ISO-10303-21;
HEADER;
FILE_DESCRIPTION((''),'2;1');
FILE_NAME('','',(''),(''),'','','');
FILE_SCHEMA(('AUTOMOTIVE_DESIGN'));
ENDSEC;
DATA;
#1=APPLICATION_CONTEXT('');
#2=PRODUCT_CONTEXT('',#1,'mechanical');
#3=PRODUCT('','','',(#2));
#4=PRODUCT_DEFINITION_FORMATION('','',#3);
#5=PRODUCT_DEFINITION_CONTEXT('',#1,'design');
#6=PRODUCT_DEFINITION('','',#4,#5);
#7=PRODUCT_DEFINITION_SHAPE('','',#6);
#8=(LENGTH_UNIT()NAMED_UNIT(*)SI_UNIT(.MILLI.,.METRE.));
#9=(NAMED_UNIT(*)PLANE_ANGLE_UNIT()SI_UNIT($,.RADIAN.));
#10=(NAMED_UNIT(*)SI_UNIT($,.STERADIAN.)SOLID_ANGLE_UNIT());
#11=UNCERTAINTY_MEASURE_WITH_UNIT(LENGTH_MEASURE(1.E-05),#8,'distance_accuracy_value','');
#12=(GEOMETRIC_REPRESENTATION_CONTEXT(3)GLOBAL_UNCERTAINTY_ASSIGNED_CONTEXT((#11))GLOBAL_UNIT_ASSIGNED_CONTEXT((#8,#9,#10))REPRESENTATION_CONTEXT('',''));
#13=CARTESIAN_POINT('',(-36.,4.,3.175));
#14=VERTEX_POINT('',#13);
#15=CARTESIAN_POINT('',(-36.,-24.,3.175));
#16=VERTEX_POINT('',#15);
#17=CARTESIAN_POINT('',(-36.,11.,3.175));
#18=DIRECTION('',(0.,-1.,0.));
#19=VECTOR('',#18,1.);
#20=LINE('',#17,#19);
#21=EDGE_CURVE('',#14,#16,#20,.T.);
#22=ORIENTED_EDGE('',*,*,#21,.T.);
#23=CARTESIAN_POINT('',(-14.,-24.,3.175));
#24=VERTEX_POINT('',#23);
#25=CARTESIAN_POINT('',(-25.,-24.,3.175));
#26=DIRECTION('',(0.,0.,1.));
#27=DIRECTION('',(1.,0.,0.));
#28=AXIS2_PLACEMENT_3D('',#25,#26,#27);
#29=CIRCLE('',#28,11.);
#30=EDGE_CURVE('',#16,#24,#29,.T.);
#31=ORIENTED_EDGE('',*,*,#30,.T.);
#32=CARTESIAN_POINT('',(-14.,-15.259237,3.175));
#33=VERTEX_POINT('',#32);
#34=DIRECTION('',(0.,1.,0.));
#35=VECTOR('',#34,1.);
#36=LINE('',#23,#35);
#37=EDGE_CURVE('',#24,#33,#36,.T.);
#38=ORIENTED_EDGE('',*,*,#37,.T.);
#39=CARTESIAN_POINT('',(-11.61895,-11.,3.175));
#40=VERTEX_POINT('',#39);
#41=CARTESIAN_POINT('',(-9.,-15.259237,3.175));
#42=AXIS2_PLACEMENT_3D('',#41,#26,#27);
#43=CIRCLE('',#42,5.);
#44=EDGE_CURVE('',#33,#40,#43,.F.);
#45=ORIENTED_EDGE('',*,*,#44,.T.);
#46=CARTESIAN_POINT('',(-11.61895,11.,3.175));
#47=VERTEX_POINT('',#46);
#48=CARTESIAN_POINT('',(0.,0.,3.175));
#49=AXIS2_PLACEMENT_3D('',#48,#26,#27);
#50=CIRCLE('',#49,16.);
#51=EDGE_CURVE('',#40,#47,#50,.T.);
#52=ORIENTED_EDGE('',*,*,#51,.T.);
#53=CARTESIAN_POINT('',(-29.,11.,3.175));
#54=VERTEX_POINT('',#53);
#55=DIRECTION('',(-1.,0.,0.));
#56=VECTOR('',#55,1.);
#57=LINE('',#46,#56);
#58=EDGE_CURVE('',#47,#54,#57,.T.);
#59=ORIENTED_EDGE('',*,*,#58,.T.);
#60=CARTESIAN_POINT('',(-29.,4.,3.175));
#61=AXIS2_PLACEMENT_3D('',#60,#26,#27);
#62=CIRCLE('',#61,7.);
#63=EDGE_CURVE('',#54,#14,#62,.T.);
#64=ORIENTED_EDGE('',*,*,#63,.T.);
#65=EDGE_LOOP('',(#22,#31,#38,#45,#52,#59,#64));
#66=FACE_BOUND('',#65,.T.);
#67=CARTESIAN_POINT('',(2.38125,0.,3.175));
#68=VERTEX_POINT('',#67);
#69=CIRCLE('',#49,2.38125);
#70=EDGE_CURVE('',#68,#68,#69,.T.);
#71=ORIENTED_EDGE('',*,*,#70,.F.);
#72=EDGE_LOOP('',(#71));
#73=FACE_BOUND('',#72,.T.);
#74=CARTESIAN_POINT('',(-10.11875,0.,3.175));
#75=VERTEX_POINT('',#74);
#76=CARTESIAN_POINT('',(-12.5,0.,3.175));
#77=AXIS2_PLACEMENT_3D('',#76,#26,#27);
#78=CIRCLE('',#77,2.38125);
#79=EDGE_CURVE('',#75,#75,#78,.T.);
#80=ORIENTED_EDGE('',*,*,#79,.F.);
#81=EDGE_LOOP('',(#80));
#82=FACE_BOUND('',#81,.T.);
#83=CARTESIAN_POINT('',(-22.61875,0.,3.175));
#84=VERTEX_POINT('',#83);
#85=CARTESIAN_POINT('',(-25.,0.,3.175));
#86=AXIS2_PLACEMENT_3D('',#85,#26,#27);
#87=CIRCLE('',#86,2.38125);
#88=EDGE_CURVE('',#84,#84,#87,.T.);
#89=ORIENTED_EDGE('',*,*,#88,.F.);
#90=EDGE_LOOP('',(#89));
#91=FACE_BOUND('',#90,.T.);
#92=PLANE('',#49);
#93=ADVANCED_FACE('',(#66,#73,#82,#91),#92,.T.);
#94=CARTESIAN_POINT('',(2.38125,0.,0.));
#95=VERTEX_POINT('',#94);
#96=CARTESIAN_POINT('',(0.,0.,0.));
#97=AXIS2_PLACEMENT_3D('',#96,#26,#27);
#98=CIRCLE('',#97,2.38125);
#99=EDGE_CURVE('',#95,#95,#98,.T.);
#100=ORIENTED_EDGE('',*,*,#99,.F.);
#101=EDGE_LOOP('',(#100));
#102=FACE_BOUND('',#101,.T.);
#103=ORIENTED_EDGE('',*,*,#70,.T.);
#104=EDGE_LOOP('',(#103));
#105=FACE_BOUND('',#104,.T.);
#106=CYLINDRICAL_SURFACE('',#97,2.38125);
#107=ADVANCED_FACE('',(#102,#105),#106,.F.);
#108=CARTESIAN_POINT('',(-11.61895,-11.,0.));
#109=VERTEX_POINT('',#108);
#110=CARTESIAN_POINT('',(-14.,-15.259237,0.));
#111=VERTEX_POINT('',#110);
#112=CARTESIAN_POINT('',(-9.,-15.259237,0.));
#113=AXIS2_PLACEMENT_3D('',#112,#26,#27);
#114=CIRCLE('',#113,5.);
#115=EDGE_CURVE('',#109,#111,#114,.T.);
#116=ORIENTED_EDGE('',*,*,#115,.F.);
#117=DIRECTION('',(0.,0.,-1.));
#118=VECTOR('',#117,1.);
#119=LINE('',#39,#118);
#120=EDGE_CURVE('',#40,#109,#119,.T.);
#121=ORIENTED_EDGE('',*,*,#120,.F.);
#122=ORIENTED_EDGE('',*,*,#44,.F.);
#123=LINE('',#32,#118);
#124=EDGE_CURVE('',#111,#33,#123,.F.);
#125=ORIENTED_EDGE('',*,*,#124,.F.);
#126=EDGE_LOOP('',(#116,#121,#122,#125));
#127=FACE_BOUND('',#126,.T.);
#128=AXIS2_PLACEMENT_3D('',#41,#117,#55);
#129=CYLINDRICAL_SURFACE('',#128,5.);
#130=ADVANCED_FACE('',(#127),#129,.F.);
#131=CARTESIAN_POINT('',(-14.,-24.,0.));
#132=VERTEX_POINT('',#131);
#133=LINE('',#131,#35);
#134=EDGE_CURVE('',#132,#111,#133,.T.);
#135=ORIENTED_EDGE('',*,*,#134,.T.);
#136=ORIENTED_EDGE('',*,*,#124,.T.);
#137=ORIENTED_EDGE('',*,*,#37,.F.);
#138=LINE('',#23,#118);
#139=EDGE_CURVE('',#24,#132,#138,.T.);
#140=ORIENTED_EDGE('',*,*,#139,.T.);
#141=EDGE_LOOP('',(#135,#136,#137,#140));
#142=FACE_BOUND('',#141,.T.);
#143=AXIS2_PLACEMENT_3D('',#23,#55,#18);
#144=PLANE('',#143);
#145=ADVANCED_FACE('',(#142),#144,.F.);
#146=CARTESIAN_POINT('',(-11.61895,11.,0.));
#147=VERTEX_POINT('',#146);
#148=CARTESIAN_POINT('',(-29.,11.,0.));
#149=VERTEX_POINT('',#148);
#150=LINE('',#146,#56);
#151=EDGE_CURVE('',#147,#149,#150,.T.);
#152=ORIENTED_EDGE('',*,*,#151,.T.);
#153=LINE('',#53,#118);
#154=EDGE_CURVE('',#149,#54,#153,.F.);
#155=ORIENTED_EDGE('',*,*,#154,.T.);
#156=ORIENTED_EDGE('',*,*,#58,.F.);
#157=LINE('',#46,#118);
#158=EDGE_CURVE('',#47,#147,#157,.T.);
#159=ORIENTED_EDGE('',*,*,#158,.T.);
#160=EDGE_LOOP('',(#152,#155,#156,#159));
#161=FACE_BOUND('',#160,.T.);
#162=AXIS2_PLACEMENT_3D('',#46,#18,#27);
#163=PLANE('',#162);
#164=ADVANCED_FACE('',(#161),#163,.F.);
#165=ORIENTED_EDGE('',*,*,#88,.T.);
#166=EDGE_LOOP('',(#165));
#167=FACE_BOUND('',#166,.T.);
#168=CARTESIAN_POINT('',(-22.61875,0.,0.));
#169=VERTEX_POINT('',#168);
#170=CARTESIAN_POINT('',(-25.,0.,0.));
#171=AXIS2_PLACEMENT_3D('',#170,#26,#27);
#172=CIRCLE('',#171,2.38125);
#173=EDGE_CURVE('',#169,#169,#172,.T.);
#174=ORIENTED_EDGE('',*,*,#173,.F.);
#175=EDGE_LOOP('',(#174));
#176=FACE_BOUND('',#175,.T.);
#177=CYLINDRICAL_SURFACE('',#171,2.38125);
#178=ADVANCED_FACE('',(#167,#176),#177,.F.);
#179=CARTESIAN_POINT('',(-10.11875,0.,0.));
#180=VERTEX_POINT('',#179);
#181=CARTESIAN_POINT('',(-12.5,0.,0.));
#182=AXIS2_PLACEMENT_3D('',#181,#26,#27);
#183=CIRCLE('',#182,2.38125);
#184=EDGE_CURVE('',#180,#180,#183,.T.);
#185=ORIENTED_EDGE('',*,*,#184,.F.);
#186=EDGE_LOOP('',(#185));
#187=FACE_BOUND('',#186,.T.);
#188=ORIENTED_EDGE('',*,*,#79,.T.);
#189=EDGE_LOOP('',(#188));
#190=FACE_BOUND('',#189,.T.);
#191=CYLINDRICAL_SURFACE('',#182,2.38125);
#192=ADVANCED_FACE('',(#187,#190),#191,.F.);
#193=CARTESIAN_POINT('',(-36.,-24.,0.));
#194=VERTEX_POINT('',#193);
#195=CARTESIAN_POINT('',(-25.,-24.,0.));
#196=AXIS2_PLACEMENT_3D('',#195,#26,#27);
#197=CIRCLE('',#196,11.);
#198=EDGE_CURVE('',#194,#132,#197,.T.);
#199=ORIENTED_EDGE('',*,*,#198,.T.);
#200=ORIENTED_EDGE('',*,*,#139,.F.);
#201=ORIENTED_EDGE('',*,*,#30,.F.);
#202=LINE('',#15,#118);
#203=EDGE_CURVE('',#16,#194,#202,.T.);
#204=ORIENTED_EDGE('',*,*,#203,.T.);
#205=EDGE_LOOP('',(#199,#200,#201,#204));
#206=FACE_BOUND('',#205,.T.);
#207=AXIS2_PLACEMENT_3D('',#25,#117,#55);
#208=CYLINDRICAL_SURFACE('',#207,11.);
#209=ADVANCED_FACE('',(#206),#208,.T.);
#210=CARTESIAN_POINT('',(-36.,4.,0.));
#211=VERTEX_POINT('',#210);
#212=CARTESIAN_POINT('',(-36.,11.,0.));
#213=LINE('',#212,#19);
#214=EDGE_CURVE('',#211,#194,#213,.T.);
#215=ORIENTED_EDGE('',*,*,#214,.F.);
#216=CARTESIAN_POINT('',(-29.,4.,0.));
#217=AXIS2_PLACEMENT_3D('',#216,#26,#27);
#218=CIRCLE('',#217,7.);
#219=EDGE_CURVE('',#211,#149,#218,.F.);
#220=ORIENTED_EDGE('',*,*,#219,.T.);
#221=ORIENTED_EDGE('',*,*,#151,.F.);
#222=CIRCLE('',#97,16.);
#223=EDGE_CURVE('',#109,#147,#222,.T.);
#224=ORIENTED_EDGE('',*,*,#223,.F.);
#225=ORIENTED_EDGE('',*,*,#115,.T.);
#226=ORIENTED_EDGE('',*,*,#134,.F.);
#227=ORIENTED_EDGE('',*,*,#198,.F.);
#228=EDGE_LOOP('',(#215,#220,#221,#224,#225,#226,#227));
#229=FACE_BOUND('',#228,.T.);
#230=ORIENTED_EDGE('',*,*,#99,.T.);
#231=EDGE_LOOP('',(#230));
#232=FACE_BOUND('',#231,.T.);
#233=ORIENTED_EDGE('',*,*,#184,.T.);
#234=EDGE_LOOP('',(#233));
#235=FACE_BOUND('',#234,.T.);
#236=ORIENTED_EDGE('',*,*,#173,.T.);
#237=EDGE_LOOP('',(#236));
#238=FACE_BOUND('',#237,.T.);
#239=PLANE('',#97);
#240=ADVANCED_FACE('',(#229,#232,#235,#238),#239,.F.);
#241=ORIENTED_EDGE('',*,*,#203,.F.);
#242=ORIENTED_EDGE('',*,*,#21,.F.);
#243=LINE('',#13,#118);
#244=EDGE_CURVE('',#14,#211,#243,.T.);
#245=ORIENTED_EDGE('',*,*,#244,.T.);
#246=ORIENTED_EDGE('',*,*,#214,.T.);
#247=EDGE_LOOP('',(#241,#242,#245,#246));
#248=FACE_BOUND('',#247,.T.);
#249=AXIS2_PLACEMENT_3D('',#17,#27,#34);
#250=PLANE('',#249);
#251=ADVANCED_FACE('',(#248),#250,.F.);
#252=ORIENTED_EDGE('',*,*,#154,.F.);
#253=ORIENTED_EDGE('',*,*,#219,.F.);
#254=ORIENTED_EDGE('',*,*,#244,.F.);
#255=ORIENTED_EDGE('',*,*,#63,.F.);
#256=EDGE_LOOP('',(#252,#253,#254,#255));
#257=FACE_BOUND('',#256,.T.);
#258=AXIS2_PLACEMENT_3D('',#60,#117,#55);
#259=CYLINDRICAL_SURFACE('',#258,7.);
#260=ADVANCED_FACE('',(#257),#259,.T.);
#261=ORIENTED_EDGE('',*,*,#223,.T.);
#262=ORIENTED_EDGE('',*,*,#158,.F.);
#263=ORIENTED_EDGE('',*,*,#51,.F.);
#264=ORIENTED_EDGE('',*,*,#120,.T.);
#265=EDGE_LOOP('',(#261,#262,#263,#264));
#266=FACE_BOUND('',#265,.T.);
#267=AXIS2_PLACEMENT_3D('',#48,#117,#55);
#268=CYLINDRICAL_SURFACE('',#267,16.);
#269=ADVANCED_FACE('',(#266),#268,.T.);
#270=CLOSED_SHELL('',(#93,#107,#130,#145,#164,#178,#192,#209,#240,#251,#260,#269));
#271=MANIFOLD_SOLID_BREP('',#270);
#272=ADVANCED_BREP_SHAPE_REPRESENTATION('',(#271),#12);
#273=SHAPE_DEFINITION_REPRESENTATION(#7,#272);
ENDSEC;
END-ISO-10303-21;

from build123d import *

# Parameters (mm, degrees)
BOSS_EXTRUDE1_DEPTH = 3.175
FILLET1_R           = 7
FILLET2_R           = 5
SKETCH2_R           = 2.38125
CUT_EXTRUDE1_DEPTH  = 51.309846203
LPATTERN1_COUNT     = 3
LPATTERN1_PITCH     = 12.5


with BuildPart() as part:
    # Sketch1 → Boss-Extrude1 (new body)
    with BuildSketch(Plane.XY):
        with BuildLine():
            Line((-11.618950039, 11), (-36, 11))
            Line((-36, 11), (-36, -24))
            ThreePointArc((-36, -24), (-25, -35), (-14, -24))
            Line((-14, -24), (-14, -11))
            Line((-14, -11), (-11.618950039, -11))
            ThreePointArc((-11.618950039, -11), (16, 0), (-11.618950039, 11))
        make_face()
    extrude(amount=BOSS_EXTRUDE1_DEPTH)

    # Fillet1
    fillet1_edges = [part.edges().sort_by_distance(p)[0] for p in [
        (-36, 11, 1.5875),
    ]]
    fillet(fillet1_edges, radius=FILLET1_R)

    # Fillet2
    # the kernel refuses this fillet: 5 mm, written as the material it adds along each edge
    with BuildSketch(Plane(origin=(-14, -11, 0), x_dir=(1, 0, 0), z_dir=(0, 0, 1))) as fillet2_piece_1:
        with BuildLine():
            CenterArc((5, -4.259237102), FILLET2_R, 121.586822832, 58.413177168)
            Line((0, -4.259237102), (-0.1, -4.259237102))
            Line((-0.1, -4.259237102), (-0.1, 0))
            Line((-0.1, 0), (0, 0.1))
            ThreePointArc((0, 0.1), (1.190524981, 0.1), (2.328670961, 0.085184742))
            Line((2.328670961, 0.085184742), (2.381049961, 0))
        make_face()
    extrude(amount=3.175)

    # Sketch2 → Cut-Extrude1 (cut, through all)
    with BuildSketch(Plane.XY.offset(3.175)):
        Circle(SKETCH2_R)
    cut_extrude1 = extrude(amount=-CUT_EXTRUDE1_DEPTH, mode=Mode.SUBTRACT)

    # LPattern1: Cut-Extrude1 ×3
    with Locations(*[(-i * LPATTERN1_PITCH, 0, 0) for i in range(1, LPATTERN1_COUNT)]):
        add(cut_extrude1, mode=Mode.SUBTRACT)


solid = part.part
